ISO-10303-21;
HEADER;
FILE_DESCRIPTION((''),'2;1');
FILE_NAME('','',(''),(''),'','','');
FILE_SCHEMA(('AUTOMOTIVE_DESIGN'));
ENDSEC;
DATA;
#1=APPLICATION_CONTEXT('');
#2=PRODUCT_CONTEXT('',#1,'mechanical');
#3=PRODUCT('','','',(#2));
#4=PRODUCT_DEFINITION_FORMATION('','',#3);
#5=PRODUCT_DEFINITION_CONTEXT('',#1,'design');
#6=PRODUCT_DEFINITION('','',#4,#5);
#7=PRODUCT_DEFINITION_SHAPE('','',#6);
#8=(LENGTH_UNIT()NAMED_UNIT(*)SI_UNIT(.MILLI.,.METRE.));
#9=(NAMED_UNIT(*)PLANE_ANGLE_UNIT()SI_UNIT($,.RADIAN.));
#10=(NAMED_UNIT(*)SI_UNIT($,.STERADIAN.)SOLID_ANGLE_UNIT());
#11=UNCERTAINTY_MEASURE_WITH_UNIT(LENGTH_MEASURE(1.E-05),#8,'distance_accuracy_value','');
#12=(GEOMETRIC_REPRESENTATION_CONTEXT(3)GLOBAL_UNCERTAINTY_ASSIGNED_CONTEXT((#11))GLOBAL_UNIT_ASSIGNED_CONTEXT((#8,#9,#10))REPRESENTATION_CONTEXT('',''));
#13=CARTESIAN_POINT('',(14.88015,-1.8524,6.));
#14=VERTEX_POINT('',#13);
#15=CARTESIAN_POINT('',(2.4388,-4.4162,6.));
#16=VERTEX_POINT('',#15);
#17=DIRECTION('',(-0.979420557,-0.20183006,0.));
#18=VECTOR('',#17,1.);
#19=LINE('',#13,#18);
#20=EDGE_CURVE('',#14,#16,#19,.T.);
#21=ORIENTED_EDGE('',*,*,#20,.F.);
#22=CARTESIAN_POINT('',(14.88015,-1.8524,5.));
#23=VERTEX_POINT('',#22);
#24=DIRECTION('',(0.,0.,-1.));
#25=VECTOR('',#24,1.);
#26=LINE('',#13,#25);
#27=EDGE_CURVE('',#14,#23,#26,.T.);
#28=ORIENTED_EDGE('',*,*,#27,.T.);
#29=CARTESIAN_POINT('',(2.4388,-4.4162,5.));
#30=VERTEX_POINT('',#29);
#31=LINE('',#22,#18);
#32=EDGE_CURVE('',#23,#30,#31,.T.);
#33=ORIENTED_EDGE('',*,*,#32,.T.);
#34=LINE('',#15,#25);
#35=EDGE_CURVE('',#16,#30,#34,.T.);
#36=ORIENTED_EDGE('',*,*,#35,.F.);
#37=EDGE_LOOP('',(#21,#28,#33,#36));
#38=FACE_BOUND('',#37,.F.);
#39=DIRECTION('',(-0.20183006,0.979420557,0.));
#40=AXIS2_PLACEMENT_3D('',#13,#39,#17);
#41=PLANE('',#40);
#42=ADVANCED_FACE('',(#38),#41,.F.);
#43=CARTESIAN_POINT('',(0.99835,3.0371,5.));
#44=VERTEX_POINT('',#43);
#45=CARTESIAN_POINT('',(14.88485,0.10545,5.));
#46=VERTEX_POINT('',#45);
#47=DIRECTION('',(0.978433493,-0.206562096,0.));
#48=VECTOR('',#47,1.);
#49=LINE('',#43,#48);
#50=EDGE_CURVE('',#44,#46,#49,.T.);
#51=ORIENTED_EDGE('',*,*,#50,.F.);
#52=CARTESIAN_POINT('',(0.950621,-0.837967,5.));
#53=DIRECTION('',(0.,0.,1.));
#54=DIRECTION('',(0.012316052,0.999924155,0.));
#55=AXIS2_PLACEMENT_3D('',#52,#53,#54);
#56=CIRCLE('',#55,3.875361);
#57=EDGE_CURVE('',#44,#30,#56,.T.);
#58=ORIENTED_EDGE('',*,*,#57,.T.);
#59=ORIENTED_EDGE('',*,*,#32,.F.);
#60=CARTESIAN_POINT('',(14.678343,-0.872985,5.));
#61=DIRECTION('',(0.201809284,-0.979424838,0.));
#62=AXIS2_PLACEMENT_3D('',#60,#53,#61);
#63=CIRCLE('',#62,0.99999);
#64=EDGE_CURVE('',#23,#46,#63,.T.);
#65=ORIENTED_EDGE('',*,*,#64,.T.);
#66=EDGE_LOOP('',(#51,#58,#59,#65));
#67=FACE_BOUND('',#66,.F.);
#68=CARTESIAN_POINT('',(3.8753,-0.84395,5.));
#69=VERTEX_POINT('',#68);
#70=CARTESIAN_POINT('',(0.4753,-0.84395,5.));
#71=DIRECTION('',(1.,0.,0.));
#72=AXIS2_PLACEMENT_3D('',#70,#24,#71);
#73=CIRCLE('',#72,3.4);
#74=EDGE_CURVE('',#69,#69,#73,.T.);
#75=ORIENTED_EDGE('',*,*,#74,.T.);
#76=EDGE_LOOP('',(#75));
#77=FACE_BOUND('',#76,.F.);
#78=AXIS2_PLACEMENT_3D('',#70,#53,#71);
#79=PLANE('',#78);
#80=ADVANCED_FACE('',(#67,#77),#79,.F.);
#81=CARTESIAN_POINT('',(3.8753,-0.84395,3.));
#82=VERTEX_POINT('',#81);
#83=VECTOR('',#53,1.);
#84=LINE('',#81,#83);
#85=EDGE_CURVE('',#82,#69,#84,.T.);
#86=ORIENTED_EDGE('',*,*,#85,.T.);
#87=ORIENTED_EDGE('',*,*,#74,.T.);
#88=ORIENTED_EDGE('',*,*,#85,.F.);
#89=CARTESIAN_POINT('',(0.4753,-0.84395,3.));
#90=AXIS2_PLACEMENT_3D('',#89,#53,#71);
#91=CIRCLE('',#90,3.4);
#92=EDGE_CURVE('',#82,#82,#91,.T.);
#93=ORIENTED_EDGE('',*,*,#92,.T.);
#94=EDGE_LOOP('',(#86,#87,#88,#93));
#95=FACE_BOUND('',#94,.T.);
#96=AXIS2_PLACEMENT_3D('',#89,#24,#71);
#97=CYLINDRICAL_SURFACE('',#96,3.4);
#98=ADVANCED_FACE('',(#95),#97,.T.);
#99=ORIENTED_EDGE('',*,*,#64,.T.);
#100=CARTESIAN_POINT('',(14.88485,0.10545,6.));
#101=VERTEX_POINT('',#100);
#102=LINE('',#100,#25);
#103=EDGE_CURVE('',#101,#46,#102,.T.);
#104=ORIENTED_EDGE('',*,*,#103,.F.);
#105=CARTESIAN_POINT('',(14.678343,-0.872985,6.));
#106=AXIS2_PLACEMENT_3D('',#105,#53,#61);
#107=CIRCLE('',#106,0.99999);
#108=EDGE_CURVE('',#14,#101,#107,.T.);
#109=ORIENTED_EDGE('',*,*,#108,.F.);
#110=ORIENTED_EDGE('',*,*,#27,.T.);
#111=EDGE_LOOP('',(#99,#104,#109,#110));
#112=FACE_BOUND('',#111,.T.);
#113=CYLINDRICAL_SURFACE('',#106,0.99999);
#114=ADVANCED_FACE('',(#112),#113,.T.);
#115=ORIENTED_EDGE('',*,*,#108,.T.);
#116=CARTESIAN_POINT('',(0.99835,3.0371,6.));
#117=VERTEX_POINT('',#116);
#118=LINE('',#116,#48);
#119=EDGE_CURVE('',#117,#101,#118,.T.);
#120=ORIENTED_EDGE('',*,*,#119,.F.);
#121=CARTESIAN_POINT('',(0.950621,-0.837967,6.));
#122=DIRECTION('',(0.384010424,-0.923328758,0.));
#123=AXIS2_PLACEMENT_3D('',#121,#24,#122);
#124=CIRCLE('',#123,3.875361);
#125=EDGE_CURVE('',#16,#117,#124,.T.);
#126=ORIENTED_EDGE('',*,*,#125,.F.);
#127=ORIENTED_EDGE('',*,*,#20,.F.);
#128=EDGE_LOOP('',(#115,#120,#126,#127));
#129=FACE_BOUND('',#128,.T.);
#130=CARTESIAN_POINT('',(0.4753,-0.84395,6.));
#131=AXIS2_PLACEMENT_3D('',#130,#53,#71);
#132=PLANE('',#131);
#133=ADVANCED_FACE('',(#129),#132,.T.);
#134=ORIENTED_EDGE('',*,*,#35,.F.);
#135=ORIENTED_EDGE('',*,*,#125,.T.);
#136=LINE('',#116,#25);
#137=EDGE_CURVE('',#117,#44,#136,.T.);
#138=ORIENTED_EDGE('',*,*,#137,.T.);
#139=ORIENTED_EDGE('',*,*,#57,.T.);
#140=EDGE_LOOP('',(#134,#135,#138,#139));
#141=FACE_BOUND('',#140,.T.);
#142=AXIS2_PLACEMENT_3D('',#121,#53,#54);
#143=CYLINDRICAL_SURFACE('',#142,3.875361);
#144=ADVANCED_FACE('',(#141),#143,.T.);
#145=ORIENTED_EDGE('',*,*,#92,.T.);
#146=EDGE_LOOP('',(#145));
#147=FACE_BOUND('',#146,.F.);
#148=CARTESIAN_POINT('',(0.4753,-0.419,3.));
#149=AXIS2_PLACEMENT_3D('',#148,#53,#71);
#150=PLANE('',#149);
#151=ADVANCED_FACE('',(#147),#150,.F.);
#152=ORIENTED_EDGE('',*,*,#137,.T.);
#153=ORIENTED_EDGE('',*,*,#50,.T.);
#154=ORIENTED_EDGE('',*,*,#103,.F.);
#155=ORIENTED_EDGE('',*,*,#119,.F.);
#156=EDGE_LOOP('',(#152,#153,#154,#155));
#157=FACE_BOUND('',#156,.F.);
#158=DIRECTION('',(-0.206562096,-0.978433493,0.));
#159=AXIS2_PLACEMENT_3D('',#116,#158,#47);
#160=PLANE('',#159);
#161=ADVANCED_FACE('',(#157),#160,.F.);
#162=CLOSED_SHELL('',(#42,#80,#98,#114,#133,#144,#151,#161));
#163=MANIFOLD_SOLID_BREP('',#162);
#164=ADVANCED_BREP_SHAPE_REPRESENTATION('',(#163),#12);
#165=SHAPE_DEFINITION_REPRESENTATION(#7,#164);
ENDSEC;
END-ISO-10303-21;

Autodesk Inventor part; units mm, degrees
ref_plane "YZ Plane" through (0, 0, 0) normal (1, 0, 0) x (0, 1, 0)
ref_plane "XZ Plane" through (0, 0, 0) normal (0, 1, 0) x (-1, 0, 0)
ref_plane "XY Plane" through (0, 0, 0) normal (0, 0, 1) x (1, 0, 0)
sketch "Sketch1" plane through (0, 0, 0) normal (0, 0, 1) x (1, 0, 0)
  circle A0 centre (0, -0.8499) radius 4.5
  circle A1 centre (0, -0.8499) radius 6.8
  ellipse E0 centre (-17.0343, 4.4205) end of major axis (-13.1075, 2.2226) minor radius 4.4388 projected
  point P0 (0, 0)
  dimension "d0" = 13.6
extrude "Extrusion1" add sketch "Sketch1" along normal blind 6 contours A0 | A1
sketch "Sketch2" plane through (0, -0.8499, 6) normal (0, 0, 1) x (1, 0, 0)
  arc A0 (1.0461, 7.7621) -> (3.927, -7.1445) centre (0.9506, 0.012) ccw
  circle A1 centre (0, 0) radius 6.8 projected
  line L0 (28.8097, -2.0169) -> (3.927, -7.1445)
  line L1 (1.0461, 7.7621) -> (28.8191, 1.8988)
  arc A2 (28.8097, -2.0169) -> (28.8191, 1.8988) centre (28.406, -0.058) ccw
  point P0 (0, 0.8499)
  dimension "d4" = 2
extrude "Extrusion2" add sketch "Sketch2" against normal blind 2 contours A1 | L1 A2 L0 A0
scale "Scale1" factors (0.5, 0.5, 0.5) then translate (0.4753, -0.419, 3) bodies 1
properties part number "sERVOsHAFKkEY"
